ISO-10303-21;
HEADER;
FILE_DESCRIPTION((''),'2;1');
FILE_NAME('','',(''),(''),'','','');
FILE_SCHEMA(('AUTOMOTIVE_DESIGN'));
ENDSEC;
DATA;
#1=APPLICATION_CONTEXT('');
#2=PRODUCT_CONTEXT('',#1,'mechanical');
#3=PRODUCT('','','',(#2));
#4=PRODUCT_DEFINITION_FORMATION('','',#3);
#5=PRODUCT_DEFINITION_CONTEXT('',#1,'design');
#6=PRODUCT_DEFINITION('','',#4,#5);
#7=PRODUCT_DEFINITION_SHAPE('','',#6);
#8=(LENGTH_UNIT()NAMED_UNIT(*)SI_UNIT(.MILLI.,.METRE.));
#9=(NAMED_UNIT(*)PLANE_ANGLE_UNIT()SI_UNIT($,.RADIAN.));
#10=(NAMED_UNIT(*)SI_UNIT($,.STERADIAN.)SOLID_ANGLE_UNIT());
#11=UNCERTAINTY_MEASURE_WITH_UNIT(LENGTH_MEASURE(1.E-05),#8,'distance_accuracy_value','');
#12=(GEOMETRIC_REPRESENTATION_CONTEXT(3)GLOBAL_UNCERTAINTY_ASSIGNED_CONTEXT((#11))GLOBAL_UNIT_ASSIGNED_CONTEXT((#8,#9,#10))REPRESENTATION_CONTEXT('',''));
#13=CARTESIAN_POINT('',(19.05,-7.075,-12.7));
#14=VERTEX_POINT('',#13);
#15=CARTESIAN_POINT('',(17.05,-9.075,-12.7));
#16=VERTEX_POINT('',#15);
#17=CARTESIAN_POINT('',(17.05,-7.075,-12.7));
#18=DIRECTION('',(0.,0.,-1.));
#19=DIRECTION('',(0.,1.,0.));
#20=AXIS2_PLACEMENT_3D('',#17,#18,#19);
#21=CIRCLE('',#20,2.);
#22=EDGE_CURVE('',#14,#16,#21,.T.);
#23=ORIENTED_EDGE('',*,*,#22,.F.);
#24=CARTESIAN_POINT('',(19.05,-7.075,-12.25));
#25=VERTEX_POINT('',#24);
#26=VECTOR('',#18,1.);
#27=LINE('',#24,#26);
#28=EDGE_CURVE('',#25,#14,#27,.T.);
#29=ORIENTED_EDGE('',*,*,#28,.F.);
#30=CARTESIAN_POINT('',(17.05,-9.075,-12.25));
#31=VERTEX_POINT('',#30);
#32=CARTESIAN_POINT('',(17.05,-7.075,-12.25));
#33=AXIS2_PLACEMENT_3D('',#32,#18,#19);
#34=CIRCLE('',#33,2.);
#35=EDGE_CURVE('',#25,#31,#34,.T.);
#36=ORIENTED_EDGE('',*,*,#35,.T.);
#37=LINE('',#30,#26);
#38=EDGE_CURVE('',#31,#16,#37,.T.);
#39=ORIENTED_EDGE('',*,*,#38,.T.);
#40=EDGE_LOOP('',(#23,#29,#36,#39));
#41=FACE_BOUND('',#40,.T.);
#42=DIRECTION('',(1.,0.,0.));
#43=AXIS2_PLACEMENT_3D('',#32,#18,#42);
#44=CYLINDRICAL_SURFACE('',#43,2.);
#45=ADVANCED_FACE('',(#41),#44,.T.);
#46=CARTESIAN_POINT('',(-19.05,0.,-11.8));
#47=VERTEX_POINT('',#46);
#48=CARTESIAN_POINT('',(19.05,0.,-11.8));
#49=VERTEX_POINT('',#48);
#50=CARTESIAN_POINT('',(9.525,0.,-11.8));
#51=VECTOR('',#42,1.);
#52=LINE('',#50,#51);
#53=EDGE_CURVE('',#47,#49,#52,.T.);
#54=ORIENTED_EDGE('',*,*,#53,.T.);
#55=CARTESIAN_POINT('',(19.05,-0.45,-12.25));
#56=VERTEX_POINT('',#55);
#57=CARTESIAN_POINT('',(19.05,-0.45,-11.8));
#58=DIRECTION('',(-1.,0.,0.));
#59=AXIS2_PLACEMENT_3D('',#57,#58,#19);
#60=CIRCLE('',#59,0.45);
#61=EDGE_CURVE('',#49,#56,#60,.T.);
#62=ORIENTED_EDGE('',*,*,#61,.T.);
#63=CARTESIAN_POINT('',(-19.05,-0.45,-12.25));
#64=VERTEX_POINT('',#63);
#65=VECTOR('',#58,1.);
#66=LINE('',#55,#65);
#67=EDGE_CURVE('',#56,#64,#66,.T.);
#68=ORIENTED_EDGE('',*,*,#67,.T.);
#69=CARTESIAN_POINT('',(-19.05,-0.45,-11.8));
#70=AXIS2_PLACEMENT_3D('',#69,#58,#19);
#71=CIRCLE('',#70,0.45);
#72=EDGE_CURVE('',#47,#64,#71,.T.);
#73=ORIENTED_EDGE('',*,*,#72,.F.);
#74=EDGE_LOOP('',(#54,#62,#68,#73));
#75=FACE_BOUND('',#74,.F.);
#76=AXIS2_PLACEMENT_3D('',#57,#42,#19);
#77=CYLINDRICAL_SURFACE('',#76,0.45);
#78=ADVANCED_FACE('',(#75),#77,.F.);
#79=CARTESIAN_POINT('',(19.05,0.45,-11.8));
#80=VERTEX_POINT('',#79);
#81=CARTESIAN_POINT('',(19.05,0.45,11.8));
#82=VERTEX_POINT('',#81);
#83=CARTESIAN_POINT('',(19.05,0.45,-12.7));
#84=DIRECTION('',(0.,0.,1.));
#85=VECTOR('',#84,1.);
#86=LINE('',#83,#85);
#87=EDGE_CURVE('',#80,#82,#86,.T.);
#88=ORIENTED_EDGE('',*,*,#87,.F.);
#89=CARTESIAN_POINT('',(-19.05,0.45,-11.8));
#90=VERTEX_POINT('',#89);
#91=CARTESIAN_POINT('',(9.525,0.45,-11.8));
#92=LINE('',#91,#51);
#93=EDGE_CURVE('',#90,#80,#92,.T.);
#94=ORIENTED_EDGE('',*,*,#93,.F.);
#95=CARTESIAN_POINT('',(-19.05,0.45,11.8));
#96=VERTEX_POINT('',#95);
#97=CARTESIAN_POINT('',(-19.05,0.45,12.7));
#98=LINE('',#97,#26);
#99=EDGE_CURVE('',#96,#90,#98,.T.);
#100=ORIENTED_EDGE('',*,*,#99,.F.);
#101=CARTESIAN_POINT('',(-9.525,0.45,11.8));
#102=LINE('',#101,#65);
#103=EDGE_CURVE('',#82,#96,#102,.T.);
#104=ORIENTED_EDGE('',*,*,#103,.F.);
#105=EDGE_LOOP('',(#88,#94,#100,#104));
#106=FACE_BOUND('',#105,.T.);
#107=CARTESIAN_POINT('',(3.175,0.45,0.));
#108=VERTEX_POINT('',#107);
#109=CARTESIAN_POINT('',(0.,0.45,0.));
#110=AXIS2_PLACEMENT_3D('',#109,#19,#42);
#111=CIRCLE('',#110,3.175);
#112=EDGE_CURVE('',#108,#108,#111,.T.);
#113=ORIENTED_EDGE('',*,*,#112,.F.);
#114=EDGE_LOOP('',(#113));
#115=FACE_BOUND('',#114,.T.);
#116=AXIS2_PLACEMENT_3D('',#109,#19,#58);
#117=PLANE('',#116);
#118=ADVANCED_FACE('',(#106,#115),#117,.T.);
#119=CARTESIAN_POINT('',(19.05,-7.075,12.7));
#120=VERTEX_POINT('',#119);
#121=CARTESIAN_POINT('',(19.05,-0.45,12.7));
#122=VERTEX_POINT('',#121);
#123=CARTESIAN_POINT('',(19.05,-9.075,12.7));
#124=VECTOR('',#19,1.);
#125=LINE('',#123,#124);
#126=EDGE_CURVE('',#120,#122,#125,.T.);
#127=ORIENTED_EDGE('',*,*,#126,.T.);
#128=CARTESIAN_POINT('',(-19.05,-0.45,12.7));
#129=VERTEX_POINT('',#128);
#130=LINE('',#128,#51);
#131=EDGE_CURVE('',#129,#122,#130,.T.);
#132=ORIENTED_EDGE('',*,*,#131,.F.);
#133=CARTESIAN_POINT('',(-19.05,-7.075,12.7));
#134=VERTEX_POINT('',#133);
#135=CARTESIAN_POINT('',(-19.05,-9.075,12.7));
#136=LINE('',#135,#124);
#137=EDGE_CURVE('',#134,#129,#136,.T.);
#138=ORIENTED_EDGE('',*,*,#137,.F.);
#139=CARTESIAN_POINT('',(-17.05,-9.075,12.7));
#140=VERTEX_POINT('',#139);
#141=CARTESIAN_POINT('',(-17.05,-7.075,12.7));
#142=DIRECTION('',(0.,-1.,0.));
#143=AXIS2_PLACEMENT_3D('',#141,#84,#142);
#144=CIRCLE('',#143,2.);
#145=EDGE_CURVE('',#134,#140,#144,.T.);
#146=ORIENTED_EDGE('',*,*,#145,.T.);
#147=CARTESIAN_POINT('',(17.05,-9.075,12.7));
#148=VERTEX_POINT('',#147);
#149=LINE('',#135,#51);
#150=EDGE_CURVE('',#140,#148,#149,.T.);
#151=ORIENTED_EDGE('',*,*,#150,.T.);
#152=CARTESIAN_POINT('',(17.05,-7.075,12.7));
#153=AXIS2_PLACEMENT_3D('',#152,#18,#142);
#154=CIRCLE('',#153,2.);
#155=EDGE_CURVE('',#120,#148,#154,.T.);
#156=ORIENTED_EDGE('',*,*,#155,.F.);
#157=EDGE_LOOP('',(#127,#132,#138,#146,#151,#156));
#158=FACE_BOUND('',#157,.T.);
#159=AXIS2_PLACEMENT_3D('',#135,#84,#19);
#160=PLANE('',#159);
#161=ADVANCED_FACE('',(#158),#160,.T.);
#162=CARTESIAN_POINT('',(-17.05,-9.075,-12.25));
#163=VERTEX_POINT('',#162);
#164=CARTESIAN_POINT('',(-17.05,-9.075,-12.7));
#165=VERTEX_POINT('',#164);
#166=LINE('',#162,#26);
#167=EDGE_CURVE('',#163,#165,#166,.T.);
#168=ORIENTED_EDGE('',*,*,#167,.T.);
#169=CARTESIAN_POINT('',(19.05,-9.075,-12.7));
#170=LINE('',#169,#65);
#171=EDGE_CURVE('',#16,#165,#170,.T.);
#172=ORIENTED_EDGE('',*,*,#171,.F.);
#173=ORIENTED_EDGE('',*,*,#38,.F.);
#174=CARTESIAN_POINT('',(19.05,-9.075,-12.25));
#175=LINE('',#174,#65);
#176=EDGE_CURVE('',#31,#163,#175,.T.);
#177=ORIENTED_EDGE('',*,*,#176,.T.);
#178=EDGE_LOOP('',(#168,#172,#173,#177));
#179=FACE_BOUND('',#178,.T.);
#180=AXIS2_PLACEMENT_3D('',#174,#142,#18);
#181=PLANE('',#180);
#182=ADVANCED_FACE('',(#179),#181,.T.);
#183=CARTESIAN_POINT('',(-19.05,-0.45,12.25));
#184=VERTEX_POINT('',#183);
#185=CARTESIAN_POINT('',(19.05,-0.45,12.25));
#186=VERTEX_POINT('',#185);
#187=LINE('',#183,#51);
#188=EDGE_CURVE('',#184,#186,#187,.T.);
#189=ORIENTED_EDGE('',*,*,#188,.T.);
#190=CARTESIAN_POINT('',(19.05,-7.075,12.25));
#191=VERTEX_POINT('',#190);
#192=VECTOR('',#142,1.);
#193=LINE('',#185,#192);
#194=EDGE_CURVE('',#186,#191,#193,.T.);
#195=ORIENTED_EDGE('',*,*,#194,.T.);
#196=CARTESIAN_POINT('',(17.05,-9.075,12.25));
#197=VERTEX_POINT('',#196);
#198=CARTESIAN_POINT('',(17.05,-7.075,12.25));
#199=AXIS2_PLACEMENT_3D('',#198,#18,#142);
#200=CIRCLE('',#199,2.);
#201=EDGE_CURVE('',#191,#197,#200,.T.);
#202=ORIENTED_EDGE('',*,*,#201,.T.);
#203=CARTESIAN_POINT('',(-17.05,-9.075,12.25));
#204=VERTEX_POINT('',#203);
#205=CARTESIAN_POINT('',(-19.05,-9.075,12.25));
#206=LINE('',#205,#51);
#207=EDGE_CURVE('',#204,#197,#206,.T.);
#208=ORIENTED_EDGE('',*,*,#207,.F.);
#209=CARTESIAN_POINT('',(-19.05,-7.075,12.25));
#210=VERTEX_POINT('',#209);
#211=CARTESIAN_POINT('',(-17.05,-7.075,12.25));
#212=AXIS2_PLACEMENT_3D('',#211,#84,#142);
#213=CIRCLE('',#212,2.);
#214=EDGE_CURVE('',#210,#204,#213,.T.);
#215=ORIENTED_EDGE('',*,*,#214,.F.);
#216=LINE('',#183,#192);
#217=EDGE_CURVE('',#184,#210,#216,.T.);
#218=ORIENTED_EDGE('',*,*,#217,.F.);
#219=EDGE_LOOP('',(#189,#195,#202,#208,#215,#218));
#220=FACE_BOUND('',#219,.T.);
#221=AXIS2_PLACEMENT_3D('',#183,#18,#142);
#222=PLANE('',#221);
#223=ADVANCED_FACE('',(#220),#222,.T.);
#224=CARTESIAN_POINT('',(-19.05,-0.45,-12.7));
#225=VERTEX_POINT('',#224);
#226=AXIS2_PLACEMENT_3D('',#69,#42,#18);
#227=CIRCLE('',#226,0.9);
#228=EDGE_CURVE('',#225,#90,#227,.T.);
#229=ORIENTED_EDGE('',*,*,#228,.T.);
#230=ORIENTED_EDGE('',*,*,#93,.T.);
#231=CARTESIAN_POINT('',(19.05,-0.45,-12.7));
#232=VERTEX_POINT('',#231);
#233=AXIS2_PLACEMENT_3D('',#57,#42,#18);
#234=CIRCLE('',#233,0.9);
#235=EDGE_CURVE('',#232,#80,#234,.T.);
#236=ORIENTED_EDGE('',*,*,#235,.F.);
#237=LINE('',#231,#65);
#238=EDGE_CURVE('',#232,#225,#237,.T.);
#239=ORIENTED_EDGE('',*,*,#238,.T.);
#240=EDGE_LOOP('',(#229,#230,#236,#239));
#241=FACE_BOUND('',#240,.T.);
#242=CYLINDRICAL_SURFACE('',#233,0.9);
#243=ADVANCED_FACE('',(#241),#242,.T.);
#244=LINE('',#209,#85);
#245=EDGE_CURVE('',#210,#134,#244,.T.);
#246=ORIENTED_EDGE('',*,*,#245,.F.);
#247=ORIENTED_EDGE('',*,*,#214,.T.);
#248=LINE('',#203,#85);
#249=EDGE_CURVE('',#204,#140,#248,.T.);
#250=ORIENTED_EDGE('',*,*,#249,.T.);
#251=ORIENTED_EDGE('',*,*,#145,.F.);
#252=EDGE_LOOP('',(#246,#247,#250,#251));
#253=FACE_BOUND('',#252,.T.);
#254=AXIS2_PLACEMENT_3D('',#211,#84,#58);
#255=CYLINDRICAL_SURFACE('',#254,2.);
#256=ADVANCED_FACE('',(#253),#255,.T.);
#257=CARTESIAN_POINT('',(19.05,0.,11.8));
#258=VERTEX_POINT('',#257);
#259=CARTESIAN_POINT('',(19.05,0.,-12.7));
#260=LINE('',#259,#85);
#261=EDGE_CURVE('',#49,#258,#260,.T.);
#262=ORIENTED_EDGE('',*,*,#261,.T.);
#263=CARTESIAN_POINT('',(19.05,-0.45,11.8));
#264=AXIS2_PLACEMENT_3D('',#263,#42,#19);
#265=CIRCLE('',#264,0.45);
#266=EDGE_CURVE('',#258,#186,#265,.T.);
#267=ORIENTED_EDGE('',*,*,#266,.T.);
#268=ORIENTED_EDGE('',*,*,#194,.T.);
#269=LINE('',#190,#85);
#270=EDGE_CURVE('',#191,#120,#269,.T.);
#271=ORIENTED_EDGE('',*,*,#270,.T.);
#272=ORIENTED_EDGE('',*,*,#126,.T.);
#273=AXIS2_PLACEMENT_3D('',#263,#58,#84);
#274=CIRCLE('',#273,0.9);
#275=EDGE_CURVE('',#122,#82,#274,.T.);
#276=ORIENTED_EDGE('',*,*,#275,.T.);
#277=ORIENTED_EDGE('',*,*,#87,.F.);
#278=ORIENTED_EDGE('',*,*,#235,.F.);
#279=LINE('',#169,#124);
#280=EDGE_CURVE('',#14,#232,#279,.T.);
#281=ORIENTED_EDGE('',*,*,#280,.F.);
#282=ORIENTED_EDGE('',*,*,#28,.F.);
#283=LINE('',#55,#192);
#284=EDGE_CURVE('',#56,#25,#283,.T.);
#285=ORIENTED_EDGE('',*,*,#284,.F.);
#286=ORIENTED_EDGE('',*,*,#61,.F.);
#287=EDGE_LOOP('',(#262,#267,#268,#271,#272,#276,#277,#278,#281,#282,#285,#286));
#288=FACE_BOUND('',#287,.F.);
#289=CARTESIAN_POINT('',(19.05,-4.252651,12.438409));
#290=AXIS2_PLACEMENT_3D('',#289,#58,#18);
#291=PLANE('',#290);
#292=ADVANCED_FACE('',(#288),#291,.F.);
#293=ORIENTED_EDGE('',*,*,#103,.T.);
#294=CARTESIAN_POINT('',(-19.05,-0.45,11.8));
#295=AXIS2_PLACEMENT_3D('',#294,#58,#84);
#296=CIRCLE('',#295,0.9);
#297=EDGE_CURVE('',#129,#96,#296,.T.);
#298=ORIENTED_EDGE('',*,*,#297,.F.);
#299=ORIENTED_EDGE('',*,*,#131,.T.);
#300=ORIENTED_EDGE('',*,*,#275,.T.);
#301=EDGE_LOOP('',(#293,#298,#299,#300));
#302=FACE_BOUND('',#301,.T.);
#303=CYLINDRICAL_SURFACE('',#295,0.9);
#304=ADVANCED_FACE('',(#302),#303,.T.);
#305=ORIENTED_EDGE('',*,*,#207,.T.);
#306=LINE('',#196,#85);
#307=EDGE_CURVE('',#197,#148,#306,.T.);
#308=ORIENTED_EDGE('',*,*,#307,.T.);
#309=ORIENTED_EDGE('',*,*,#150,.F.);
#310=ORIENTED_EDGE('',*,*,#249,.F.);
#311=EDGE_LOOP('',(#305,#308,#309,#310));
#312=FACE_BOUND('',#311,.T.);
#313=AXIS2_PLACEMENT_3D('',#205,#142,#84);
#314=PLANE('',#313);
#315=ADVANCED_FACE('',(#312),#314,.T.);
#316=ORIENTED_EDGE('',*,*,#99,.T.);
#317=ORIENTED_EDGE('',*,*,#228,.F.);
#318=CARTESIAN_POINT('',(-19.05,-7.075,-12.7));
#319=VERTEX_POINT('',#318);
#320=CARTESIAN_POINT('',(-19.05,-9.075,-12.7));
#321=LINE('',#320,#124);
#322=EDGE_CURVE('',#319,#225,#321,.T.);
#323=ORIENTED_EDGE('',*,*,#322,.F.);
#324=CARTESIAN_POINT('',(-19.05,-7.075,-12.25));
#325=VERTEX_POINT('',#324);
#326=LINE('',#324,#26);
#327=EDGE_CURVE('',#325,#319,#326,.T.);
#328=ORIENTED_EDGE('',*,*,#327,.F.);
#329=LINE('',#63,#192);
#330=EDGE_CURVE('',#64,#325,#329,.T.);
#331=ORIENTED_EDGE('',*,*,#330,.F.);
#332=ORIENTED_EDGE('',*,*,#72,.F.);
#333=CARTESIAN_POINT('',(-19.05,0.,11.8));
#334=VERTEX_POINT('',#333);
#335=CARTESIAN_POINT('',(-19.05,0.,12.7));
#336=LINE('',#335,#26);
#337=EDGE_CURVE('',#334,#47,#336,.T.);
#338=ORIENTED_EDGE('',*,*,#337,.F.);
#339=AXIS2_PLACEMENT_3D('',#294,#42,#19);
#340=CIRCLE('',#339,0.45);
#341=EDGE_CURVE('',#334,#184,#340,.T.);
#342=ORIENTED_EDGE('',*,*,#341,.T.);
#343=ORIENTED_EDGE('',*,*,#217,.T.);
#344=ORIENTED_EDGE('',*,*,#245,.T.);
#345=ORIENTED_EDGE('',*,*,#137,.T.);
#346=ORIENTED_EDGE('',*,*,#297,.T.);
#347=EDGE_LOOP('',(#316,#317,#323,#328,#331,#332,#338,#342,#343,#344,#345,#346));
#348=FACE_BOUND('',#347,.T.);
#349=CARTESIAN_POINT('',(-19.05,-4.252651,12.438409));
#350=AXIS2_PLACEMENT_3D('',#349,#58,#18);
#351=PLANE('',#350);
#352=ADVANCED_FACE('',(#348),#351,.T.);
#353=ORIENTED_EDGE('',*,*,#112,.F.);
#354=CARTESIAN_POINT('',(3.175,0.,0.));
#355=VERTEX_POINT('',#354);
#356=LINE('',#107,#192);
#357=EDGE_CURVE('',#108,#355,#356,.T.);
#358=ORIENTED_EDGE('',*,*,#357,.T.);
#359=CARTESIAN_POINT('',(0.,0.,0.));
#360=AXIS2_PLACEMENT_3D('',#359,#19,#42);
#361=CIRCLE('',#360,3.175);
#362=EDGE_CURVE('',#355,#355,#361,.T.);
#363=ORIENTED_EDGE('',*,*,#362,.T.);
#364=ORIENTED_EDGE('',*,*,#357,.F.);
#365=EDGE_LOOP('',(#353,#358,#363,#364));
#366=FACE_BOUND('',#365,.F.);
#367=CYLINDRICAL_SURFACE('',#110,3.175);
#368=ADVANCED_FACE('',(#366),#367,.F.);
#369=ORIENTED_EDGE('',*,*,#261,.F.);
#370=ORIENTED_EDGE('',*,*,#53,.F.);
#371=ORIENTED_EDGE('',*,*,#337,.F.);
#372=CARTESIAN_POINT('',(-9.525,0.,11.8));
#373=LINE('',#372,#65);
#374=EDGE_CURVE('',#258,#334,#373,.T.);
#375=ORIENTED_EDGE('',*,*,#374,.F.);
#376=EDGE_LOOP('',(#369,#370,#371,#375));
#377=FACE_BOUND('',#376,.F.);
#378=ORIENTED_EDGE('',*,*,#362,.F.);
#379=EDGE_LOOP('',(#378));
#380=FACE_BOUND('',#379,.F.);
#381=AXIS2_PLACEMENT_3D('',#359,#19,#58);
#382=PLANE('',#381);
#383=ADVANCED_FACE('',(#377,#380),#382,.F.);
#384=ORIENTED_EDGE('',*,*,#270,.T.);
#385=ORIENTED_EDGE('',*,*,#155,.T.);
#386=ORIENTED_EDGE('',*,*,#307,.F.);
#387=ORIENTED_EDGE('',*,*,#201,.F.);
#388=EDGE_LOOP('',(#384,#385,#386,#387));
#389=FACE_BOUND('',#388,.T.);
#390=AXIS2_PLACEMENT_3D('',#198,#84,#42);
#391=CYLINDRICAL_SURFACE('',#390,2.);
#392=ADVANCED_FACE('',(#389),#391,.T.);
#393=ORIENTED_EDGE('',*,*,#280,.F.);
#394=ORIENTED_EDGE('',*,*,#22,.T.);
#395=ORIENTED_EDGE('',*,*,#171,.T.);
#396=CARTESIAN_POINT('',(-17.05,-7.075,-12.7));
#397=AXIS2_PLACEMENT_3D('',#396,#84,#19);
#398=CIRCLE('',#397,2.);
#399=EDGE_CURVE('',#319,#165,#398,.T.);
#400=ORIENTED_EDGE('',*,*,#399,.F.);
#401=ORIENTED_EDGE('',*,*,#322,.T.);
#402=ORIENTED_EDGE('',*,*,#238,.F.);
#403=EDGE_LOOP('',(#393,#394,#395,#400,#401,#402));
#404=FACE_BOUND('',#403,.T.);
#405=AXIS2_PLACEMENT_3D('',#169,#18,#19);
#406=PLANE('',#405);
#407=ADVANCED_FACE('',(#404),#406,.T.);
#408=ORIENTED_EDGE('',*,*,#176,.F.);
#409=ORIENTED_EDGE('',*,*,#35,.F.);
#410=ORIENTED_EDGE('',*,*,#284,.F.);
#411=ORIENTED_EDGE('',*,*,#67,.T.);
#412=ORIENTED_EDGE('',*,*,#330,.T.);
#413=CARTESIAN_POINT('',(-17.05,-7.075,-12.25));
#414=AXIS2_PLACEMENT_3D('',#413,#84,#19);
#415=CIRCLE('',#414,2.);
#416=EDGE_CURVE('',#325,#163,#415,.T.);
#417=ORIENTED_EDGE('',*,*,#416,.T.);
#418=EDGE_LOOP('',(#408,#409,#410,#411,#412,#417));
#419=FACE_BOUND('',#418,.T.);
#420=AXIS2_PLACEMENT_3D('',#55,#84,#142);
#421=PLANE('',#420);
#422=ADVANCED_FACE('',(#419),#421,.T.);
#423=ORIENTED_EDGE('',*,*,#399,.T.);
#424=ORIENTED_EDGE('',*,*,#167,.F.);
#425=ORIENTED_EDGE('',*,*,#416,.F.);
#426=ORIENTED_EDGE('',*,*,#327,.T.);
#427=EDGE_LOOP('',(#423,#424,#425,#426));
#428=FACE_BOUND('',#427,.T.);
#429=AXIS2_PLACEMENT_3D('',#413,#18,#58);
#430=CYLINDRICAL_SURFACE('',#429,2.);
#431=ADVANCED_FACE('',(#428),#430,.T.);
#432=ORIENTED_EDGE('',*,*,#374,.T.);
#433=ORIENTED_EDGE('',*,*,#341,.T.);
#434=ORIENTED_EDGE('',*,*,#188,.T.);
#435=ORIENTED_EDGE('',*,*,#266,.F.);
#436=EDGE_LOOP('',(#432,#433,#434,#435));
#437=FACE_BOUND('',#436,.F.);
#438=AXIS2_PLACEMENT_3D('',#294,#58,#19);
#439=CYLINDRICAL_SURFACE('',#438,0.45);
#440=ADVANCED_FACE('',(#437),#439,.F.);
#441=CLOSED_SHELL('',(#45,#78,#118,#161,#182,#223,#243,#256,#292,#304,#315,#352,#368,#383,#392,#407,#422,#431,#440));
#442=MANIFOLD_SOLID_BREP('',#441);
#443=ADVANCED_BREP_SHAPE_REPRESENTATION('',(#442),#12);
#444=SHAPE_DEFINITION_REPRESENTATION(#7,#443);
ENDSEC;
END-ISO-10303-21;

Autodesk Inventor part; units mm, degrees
ref_plane "YZ Plane" through (0, 0, 0) normal (1, 0, 0) x (0, 1, 0)
ref_plane "XZ Plane" through (0, 0, 0) normal (0, 1, 0) x (-1, 0, 0)
ref_plane "XY Plane" through (0, 0, 0) normal (0, 0, 1) x (1, 0, 0)
sketch "Boceto1" plane through (0, 0, 0) normal (0, 1, 0) x (-1, 0, 0)
  line L0 (19.05, -12.7) -> (-19.05, -12.7)
  line L1 (-19.05, -12.7) -> (-19.05, 12.7)
  line L2 (-19.05, 12.7) -> (19.05, 12.7)
  line L3 (19.05, 12.7) -> (19.05, -12.7)
  line L4 (19.05, -12.7) -> (-19.05, 12.7) construction
  line L5 (-19.05, -12.7) -> (19.05, 12.7) construction
  point P0 (0, 0)
  dimension "d0" = 38.1
  dimension "d1" = 25.4
extrude "Placa1" add sketch "Boceto1" along normal blind 0.45
sketch "Boceto2" plane through (-19.05, 0.45, 12.25) normal (0, 0, 1) x (1, 0, 0)
  line L0 (38.1, 0) -> (0, 0)
  line L1 (0, 0) -> (0, -9.525)
  line L2 (0, -9.525) -> (38.1, -9.525)
  line L3 (38.1, -9.525) -> (38.1, 0)
edge flange "Pestaña1" height 9.525 angle 90 thickness 0.45 bend radius 0.45 thickness toward (0, 0, 1) relief tear relief width 0.45 relief depth 0.225 corner gap 0.45 corner form 0 edges at (0, 0, 12.7) (0, 0, -12.7) wall of the first edge with corners at (19.05, 0.45, 12.25) (-19.05, 0.45, 12.25) (-19.05, -9.075, 12.25) (19.05, -9.075, 12.25)
bend "Doblez1"
corner "Esquina1"
fillet "Empalme1" radius 2 4 edges at (19.05, -9.075, 12.475) (19.05, -9.075, -12.475) (-19.05, -9.075, 12.475) (-19.05, -9.075, -12.475)
sketch "Boceto3" plane through (0, 0.45, 0) normal (0, 1, 0) x (1, 0, 0)
  circle A0 centre (0, 0) radius 3.175
  dimension "d14" = 6.35
extrude "Cortar1" cut sketch "Boceto3" against normal blind 0.45
equation "\"d15\" = Grosor"
equation "\"d2\" = Grosor"
equation "\"d3\" = Anchura_desahogo_plegado"
equation "\"d4\" = Profundidad_desahogo_plegado"
equation "\"d5\" = Remanente_mínimo"
equation "\"d6\" = Radiodetransición"
equation "\"d9\" = Radio_pliegue"
equation "\"d10\" = Tamaño_destalonado"
equation "\"d11\" = TamañoSeparación"
equation "\"d12\" = Tamaño_de_radio_de_Jacobi"
equation "\"Radio_pliegue\" = Grosor"
equation "\"Anchura_desahogo_plegado\" = Grosor"
equation "\"Profundidad_desahogo_plegado\" = 0.5 * Grosor"
equation "\"Tamaño_destalonado\" = 4 * Grosor"
equation "\"Remanente_mínimo\" = 2 * Grosor"
equation "\"Radiodetransición\" = Radio_pliegue"
equation "\"Tamaño_de_radio_de_Jacobi\" = Radio_pliegue"
equation "\"TamañoSeparación\" = Grosor"
equation "\"Grosor\" = 0.45"
properties part number "guarda_conector_ceramico" material "Acero AISI 1006 85 LC"
